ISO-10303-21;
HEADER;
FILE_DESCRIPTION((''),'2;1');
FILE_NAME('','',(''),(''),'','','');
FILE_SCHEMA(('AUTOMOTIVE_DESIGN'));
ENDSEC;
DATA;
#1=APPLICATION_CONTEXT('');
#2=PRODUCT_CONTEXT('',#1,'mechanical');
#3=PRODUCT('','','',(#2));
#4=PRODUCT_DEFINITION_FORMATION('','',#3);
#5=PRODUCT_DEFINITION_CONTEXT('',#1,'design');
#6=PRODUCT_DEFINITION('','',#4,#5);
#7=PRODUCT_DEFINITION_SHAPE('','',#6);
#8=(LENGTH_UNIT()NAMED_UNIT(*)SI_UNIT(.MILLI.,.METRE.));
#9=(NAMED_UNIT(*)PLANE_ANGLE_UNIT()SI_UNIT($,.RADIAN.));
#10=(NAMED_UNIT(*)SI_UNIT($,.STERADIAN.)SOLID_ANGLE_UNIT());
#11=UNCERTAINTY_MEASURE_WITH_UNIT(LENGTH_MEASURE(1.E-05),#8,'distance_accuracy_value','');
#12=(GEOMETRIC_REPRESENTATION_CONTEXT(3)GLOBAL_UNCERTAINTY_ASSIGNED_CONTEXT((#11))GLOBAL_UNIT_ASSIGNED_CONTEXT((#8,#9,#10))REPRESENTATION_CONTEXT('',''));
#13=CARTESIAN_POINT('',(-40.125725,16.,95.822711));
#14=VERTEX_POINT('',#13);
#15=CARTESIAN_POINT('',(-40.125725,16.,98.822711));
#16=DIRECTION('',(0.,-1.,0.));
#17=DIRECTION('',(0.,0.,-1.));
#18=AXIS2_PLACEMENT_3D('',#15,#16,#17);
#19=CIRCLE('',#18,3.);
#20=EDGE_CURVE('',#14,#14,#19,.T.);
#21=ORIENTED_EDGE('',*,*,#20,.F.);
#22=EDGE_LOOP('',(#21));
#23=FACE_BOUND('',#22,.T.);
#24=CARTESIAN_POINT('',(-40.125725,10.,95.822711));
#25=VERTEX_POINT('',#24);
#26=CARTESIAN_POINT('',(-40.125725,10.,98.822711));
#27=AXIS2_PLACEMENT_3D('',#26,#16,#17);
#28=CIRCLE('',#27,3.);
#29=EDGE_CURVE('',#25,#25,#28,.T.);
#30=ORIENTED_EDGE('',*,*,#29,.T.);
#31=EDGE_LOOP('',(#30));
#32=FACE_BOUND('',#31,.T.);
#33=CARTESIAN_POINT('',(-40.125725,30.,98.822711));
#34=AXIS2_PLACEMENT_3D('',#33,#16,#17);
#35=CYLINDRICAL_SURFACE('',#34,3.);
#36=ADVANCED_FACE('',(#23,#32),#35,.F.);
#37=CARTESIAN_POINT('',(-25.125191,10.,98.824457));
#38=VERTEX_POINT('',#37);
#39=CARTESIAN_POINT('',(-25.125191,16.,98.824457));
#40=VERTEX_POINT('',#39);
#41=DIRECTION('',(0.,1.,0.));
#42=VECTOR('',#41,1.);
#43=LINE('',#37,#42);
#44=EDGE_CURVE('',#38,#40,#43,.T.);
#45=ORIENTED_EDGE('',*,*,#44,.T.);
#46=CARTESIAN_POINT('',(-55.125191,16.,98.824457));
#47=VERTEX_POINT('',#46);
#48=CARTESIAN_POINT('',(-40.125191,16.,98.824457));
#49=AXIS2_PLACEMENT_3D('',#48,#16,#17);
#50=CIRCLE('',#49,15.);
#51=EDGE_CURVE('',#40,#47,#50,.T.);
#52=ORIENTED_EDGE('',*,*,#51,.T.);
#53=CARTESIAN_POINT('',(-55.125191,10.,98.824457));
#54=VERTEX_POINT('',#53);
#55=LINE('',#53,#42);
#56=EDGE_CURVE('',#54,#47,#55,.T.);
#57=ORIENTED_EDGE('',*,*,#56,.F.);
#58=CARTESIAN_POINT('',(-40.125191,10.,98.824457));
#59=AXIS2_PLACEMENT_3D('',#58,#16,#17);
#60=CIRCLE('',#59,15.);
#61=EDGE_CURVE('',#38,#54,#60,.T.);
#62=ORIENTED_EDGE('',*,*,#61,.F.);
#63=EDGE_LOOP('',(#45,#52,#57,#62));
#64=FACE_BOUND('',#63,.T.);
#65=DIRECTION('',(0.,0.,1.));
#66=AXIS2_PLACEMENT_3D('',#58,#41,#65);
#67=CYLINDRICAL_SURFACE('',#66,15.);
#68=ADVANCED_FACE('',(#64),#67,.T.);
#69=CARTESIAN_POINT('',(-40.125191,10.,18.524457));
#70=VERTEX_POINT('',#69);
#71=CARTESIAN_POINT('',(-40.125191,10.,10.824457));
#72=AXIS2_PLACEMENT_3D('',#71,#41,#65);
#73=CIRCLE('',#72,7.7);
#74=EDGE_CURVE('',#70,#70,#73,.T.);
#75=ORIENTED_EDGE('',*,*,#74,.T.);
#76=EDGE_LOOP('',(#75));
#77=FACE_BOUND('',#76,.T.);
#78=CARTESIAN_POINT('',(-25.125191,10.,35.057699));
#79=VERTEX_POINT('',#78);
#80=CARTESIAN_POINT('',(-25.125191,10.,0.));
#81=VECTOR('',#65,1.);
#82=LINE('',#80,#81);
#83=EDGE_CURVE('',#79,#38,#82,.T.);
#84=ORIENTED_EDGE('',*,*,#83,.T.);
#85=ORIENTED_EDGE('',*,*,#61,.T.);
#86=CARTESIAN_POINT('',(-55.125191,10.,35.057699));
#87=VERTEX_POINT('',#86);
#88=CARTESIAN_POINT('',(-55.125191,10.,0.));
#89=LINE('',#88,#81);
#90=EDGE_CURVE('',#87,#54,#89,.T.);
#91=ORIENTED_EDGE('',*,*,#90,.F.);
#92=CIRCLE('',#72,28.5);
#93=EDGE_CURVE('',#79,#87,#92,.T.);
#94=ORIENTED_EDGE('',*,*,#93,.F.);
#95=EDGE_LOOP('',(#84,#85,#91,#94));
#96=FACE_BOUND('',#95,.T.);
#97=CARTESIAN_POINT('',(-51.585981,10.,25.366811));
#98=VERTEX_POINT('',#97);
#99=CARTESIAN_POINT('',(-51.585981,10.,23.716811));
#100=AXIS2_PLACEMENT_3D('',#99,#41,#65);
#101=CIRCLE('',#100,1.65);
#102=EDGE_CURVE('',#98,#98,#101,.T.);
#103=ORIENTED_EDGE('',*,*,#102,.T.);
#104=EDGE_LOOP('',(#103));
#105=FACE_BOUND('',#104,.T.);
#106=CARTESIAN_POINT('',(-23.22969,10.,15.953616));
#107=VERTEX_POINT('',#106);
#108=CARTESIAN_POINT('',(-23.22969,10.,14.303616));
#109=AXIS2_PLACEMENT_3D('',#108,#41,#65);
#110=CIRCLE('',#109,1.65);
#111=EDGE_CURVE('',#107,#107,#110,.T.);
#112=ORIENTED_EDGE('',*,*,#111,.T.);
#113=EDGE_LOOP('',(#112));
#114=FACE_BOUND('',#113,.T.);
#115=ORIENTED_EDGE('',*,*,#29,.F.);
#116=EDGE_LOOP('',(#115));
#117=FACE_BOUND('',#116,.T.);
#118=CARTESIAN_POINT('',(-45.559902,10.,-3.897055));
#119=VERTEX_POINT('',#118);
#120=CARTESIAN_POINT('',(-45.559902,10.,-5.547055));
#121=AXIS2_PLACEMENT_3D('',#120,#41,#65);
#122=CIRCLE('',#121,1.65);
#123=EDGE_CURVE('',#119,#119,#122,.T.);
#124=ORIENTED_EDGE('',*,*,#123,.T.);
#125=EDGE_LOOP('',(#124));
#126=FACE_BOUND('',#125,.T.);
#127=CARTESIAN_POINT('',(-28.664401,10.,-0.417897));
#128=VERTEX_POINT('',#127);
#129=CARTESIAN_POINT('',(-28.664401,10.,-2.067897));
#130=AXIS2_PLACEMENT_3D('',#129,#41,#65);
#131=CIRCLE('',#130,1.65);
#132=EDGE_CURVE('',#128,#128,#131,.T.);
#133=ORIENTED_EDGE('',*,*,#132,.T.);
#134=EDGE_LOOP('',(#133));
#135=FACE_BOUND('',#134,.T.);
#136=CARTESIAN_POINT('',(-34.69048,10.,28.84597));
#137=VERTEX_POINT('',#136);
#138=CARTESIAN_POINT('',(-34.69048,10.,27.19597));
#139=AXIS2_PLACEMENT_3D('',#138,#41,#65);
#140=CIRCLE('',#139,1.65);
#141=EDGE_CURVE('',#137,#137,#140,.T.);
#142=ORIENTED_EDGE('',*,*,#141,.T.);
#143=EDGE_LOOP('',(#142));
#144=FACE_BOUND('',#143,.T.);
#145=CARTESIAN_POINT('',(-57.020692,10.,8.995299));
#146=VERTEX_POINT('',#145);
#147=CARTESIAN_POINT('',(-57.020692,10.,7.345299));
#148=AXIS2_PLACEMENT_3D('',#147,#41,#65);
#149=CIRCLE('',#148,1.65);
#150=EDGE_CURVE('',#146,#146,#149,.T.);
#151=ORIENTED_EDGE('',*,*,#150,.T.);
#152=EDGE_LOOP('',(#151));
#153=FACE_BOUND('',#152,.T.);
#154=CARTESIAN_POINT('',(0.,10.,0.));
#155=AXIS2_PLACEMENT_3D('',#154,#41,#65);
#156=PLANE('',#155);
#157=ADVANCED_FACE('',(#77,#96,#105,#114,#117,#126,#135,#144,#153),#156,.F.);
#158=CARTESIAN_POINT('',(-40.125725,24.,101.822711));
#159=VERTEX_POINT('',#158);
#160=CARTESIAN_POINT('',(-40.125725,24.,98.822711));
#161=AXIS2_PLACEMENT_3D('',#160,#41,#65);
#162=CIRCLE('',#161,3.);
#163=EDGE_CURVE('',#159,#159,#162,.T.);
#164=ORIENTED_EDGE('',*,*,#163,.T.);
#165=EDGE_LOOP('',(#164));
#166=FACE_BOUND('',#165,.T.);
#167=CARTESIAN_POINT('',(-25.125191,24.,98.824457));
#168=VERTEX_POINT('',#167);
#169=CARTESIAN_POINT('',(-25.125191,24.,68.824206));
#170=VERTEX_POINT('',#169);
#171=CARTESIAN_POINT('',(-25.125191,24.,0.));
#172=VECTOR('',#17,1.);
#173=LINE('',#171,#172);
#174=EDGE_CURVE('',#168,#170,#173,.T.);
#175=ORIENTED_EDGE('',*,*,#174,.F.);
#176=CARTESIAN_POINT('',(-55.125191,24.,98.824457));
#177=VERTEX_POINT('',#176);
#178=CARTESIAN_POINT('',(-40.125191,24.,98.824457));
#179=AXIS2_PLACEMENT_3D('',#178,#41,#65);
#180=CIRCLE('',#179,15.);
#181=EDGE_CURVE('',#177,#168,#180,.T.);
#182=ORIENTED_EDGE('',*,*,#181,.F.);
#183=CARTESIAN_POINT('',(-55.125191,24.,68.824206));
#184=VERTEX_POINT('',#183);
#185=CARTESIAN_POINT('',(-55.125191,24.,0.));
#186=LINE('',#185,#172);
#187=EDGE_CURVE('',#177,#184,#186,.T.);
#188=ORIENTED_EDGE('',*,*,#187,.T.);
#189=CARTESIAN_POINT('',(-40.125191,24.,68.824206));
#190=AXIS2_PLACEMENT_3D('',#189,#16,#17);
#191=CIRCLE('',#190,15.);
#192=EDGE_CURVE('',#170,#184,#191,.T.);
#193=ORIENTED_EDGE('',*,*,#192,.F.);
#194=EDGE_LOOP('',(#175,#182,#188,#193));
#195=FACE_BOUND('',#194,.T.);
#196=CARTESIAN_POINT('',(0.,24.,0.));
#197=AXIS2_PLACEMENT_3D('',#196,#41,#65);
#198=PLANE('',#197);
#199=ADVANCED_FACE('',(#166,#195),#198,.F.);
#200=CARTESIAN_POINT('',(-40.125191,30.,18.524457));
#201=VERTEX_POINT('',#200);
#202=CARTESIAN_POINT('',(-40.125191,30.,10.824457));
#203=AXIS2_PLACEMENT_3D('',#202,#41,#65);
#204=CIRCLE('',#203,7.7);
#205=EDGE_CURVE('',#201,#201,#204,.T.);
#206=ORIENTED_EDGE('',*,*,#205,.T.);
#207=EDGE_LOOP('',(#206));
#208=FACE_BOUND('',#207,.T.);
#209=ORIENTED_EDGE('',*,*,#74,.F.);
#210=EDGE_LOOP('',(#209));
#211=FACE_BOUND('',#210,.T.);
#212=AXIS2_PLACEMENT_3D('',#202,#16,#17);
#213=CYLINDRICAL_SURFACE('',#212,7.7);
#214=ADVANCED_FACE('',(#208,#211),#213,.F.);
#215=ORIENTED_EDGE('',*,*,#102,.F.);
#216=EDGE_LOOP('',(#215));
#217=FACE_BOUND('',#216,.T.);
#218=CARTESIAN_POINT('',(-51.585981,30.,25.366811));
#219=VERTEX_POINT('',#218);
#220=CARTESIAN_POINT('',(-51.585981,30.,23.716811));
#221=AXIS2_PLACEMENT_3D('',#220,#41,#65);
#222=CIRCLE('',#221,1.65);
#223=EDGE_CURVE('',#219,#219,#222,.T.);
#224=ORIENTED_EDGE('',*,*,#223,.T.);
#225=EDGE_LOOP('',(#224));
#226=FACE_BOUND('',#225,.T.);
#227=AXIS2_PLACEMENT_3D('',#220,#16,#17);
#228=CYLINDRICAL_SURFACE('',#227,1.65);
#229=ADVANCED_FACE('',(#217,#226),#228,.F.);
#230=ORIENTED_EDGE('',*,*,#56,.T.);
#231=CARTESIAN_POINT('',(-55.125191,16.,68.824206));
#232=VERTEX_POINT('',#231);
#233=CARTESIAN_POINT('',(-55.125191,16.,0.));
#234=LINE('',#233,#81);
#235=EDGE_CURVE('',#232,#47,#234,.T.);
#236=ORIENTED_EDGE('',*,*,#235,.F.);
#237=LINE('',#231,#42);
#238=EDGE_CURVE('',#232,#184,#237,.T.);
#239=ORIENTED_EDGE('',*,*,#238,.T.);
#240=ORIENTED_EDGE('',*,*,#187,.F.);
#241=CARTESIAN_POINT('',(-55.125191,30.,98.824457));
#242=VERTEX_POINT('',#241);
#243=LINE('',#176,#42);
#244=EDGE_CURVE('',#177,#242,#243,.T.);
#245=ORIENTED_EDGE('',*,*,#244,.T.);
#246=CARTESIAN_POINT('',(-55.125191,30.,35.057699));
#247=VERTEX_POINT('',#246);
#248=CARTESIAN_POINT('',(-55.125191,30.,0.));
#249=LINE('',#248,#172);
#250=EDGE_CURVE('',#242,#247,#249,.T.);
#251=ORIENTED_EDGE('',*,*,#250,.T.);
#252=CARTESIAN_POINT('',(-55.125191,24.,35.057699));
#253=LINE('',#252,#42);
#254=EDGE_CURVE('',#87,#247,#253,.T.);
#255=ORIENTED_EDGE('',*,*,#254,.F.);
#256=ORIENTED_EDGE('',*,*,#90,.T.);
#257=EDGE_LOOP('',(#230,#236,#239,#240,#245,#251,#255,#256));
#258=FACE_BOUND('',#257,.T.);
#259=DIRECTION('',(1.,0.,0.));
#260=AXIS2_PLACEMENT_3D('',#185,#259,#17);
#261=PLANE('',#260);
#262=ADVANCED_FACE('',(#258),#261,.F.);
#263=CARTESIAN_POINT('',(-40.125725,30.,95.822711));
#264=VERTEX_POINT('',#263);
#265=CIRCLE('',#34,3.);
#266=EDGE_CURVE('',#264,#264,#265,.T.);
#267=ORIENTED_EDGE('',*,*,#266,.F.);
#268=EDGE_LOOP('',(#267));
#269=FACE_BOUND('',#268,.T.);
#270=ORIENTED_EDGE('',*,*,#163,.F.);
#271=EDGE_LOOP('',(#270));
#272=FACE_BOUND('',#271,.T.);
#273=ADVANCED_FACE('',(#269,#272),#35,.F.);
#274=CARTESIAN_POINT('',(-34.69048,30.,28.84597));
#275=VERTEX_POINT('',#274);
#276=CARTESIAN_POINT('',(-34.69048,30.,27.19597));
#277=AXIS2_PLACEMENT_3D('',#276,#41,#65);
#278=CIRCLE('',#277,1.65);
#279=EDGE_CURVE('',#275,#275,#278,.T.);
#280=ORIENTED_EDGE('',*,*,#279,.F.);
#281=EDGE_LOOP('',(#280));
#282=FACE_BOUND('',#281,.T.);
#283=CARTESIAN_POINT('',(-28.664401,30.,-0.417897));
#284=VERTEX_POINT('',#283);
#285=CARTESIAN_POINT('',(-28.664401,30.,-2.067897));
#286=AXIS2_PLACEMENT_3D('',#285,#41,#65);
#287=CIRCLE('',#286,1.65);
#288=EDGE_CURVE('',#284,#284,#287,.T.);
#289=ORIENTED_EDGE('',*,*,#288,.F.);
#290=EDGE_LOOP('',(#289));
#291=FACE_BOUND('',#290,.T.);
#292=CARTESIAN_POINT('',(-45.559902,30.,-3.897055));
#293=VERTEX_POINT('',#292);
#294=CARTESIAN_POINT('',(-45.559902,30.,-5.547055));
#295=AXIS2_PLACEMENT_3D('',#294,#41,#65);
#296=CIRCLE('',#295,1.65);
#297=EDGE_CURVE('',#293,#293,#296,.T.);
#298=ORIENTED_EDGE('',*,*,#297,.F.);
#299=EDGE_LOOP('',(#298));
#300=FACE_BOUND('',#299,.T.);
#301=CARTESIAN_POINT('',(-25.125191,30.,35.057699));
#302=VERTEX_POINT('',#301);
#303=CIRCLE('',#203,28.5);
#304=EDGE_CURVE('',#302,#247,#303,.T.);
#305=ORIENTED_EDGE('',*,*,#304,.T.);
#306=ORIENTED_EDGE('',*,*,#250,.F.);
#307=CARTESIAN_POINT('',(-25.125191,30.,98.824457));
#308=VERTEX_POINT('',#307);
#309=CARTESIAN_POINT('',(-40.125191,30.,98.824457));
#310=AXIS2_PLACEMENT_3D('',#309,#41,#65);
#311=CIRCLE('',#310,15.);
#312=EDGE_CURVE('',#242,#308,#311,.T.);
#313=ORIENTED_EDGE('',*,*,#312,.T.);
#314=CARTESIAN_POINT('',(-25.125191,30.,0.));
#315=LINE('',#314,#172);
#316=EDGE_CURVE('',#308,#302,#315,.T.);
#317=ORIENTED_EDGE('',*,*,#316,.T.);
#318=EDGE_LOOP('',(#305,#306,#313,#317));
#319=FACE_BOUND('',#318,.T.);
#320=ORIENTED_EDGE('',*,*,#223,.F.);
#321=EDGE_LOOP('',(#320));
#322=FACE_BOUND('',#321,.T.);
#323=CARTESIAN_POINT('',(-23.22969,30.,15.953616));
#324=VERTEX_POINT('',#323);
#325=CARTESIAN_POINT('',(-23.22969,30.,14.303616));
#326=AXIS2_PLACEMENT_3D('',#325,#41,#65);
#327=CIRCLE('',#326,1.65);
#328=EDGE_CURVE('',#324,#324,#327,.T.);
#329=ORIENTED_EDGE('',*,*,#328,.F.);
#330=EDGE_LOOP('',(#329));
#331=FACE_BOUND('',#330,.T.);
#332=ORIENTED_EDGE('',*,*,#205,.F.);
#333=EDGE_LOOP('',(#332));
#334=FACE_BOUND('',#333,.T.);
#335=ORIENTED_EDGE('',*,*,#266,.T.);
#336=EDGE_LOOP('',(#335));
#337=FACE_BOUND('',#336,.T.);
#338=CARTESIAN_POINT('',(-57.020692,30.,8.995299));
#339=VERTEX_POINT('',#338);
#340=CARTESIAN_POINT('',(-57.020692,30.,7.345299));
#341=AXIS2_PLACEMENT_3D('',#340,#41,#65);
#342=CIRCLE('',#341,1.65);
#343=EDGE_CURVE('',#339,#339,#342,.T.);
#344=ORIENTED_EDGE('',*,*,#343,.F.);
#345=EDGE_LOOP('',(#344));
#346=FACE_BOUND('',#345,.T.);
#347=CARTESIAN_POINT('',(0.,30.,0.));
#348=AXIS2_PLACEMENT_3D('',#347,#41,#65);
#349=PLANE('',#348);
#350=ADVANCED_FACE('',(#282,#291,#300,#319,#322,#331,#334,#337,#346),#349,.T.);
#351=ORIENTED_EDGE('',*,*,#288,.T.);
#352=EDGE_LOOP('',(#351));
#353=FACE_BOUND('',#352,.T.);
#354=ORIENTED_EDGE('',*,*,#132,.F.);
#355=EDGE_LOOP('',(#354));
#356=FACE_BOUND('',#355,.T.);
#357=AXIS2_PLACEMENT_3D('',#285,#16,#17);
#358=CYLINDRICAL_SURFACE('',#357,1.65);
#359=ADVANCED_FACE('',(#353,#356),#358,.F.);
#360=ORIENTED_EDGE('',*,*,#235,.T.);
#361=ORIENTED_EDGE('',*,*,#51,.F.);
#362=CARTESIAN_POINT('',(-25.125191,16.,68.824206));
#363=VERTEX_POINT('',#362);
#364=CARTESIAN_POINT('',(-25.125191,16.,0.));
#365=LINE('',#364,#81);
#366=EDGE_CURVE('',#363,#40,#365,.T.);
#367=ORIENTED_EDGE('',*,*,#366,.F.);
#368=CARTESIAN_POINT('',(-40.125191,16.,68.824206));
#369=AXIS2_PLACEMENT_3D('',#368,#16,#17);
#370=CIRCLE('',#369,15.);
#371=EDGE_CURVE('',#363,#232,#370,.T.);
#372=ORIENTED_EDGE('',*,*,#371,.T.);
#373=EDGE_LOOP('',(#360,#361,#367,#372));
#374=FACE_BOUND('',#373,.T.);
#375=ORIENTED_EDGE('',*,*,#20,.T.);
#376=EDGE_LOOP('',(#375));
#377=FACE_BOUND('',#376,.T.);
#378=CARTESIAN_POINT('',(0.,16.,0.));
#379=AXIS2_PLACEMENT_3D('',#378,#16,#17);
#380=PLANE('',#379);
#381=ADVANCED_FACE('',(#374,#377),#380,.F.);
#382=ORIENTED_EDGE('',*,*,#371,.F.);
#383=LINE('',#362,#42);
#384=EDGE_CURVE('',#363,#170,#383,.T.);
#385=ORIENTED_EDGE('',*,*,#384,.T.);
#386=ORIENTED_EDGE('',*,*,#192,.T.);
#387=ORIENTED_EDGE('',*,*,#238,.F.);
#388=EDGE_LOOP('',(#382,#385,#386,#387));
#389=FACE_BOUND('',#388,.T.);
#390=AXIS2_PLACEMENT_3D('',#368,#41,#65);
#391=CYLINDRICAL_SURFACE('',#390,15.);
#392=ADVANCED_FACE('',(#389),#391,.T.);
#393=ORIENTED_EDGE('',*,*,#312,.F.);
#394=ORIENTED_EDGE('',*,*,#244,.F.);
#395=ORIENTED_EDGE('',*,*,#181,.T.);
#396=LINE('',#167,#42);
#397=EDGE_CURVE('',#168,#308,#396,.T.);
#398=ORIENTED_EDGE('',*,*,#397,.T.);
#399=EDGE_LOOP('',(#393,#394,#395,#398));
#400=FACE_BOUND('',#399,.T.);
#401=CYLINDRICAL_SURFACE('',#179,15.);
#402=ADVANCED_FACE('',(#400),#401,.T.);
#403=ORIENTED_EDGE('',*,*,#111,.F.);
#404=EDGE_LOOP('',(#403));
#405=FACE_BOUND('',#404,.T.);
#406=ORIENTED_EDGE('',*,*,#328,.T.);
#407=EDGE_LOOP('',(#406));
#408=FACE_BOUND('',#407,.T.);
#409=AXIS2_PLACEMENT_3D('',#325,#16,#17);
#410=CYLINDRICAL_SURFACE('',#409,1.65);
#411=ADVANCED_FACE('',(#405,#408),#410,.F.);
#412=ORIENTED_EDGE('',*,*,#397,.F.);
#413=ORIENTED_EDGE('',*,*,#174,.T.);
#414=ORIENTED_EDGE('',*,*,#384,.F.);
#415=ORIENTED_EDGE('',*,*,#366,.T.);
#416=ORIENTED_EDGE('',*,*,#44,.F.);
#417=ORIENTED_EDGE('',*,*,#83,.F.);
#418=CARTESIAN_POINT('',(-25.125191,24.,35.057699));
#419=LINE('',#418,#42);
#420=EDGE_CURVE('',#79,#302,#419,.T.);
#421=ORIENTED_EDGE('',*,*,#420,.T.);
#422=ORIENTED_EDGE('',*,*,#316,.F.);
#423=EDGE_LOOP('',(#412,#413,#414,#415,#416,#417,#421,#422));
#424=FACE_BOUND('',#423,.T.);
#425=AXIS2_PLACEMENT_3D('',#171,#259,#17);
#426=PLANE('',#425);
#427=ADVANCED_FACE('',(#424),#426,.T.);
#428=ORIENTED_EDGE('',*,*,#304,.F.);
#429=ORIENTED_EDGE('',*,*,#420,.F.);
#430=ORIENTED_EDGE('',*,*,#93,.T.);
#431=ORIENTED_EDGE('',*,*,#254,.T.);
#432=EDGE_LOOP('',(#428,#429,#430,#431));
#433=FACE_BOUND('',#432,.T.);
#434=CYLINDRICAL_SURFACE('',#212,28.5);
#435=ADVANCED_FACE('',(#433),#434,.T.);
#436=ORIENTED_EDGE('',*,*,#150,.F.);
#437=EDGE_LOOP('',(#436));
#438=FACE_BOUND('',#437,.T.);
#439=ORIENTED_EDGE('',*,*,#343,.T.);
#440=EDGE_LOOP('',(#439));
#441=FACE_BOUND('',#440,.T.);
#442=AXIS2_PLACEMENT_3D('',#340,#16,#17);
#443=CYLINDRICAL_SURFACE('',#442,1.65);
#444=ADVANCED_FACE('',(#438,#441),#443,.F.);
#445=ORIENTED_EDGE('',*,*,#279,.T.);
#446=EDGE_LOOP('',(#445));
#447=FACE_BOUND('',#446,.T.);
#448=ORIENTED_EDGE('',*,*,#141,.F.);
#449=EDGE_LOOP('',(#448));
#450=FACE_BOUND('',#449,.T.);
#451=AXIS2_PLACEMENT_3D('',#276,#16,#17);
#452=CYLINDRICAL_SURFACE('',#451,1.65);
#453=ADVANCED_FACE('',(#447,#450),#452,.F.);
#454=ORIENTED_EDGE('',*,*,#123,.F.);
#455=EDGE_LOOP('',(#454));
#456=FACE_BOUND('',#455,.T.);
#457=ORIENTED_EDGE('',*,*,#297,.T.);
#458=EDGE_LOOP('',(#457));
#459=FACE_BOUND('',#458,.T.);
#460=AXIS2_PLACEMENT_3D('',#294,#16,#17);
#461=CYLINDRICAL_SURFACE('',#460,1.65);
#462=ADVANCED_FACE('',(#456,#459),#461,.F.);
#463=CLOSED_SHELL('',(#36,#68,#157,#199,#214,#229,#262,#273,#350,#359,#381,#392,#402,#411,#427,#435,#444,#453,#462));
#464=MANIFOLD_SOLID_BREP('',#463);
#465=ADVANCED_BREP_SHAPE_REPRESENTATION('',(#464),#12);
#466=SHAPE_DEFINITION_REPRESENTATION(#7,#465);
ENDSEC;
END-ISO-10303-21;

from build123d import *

# Parameters (mm, degrees)
SKETCH_2_R          = 28.5
SKETCH_2_R_2        = 1.65
SKETCH_2_R_3        = 7.7
EXTRUDE_2_DEPTH     = 20
EXTRUDE_START       = -6
EXTRUDE_3_DEPTH     = 6
EXTRUDE_START_2     = 8
EXTRUDE_4_DEPTH     = 8
EXTRUDE_START_3     = 6
EXTRUDE_5_DEPTH     = 6
SKETCH_7_R          = 3
CUT_EXTRUDE_4_DEPTH = 20


with BuildPart() as part:
    # 草图2 → 凸台-拉伸2 (new body)
    with BuildSketch(Plane(origin=(0, 10, 0), x_dir=(0, 0, -1), z_dir=(0, 1, 0))):
        with Locations((-10.824457271, 40.125190792)):
            Circle(SKETCH_2_R)
        with Locations((-14.303615873, 23.229689751)):
            Circle(SKETCH_2_R_2, mode=Mode.SUBTRACT)
        with Locations((-27.195969683, 34.690480004)):
            Circle(SKETCH_2_R_2, mode=Mode.SUBTRACT)
        with Locations((2.067896539, 28.664400538)):
            Circle(SKETCH_2_R_2, mode=Mode.SUBTRACT)
        with Locations((-23.716811081, 51.585981045)):
            Circle(SKETCH_2_R_2, mode=Mode.SUBTRACT)
        with Locations((-10.824457271, 40.125190792)):
            Circle(SKETCH_2_R_3, mode=Mode.SUBTRACT)
        with Locations((5.547055141, 45.559901579)):
            Circle(SKETCH_2_R_2, mode=Mode.SUBTRACT)
        with Locations((-7.345298669, 57.020691832)):
            Circle(SKETCH_2_R_2, mode=Mode.SUBTRACT)
    extrude(amount=EXTRUDE_2_DEPTH)

    # 草图3 → 凸台-拉伸3 (add)
    with BuildSketch(Plane(origin=(0, 30, 0), x_dir=(1, 0, 0), z_dir=(0, 1, 0)).offset(EXTRUDE_START)):
        with BuildLine():
            ThreePointArc((-25.125190792, -35.057698903), (-40.125190792, -39.324457271), (-55.125190792, -35.057698903))
            Line((-55.125190792, -35.057698903), (-55.125190792, -98.824457271))
            ThreePointArc((-55.125190792, -98.824457271), (-40.125190792, -113.824457271), (-25.125190792, -98.824457271))
            Line((-25.125190792, -98.824457271), (-25.125190792, -35.057698903))
        make_face()
    extrude(amount=EXTRUDE_3_DEPTH)

    # 草图5 → 凸台-拉伸4 (add)
    with BuildSketch(Plane(origin=(0, 24, 0), x_dir=(-1, 0, 0), z_dir=(0, -1, 0)).offset(EXTRUDE_START_2)):
        with BuildLine():
            Line((55.125190792, -68.824205807), (55.125190792, -35.057698903))
            ThreePointArc((55.125190792, -35.057698903), (40.125190792, -39.324457271), (25.125190792, -35.057698903))
            Line((25.125190792, -35.057698903), (25.125190792, -68.824205807))
            ThreePointArc((25.125190792, -68.824205807), (40.125190792, -83.824205807), (55.125190792, -68.824205807))
        make_face()
    extrude(amount=-EXTRUDE_4_DEPTH)

    # 草图6 → 凸台-拉伸5 (add)
    with BuildSketch(Plane(origin=(0, 16, 0), x_dir=(-1, 0, 0), z_dir=(0, -1, 0)).offset(EXTRUDE_START_3)):
        with BuildLine():
            ThreePointArc((55.125190792, -35.057698903), (40.125190792, -39.324457271), (25.125190792, -35.057698903))
            Line((25.125190792, -35.057698903), (25.125190792, -98.824457271))
            ThreePointArc((25.125190792, -98.824457271), (40.125190792, -113.824457271), (55.125190792, -98.824457271))
            Line((55.125190792, -98.824457271), (55.125190792, -35.057698903))
        make_face()
    extrude(amount=-EXTRUDE_5_DEPTH)

    # 草图7 → 切除-拉伸4 (cut)
    with BuildSketch(Plane(origin=(0, 10, 0), x_dir=(-1, 0, 0), z_dir=(0, -1, 0))):
        with Locations((40.125725395, -98.822710565)):
            Circle(SKETCH_7_R)
    extrude(amount=-CUT_EXTRUDE_4_DEPTH, mode=Mode.SUBTRACT)


solid = part.part
